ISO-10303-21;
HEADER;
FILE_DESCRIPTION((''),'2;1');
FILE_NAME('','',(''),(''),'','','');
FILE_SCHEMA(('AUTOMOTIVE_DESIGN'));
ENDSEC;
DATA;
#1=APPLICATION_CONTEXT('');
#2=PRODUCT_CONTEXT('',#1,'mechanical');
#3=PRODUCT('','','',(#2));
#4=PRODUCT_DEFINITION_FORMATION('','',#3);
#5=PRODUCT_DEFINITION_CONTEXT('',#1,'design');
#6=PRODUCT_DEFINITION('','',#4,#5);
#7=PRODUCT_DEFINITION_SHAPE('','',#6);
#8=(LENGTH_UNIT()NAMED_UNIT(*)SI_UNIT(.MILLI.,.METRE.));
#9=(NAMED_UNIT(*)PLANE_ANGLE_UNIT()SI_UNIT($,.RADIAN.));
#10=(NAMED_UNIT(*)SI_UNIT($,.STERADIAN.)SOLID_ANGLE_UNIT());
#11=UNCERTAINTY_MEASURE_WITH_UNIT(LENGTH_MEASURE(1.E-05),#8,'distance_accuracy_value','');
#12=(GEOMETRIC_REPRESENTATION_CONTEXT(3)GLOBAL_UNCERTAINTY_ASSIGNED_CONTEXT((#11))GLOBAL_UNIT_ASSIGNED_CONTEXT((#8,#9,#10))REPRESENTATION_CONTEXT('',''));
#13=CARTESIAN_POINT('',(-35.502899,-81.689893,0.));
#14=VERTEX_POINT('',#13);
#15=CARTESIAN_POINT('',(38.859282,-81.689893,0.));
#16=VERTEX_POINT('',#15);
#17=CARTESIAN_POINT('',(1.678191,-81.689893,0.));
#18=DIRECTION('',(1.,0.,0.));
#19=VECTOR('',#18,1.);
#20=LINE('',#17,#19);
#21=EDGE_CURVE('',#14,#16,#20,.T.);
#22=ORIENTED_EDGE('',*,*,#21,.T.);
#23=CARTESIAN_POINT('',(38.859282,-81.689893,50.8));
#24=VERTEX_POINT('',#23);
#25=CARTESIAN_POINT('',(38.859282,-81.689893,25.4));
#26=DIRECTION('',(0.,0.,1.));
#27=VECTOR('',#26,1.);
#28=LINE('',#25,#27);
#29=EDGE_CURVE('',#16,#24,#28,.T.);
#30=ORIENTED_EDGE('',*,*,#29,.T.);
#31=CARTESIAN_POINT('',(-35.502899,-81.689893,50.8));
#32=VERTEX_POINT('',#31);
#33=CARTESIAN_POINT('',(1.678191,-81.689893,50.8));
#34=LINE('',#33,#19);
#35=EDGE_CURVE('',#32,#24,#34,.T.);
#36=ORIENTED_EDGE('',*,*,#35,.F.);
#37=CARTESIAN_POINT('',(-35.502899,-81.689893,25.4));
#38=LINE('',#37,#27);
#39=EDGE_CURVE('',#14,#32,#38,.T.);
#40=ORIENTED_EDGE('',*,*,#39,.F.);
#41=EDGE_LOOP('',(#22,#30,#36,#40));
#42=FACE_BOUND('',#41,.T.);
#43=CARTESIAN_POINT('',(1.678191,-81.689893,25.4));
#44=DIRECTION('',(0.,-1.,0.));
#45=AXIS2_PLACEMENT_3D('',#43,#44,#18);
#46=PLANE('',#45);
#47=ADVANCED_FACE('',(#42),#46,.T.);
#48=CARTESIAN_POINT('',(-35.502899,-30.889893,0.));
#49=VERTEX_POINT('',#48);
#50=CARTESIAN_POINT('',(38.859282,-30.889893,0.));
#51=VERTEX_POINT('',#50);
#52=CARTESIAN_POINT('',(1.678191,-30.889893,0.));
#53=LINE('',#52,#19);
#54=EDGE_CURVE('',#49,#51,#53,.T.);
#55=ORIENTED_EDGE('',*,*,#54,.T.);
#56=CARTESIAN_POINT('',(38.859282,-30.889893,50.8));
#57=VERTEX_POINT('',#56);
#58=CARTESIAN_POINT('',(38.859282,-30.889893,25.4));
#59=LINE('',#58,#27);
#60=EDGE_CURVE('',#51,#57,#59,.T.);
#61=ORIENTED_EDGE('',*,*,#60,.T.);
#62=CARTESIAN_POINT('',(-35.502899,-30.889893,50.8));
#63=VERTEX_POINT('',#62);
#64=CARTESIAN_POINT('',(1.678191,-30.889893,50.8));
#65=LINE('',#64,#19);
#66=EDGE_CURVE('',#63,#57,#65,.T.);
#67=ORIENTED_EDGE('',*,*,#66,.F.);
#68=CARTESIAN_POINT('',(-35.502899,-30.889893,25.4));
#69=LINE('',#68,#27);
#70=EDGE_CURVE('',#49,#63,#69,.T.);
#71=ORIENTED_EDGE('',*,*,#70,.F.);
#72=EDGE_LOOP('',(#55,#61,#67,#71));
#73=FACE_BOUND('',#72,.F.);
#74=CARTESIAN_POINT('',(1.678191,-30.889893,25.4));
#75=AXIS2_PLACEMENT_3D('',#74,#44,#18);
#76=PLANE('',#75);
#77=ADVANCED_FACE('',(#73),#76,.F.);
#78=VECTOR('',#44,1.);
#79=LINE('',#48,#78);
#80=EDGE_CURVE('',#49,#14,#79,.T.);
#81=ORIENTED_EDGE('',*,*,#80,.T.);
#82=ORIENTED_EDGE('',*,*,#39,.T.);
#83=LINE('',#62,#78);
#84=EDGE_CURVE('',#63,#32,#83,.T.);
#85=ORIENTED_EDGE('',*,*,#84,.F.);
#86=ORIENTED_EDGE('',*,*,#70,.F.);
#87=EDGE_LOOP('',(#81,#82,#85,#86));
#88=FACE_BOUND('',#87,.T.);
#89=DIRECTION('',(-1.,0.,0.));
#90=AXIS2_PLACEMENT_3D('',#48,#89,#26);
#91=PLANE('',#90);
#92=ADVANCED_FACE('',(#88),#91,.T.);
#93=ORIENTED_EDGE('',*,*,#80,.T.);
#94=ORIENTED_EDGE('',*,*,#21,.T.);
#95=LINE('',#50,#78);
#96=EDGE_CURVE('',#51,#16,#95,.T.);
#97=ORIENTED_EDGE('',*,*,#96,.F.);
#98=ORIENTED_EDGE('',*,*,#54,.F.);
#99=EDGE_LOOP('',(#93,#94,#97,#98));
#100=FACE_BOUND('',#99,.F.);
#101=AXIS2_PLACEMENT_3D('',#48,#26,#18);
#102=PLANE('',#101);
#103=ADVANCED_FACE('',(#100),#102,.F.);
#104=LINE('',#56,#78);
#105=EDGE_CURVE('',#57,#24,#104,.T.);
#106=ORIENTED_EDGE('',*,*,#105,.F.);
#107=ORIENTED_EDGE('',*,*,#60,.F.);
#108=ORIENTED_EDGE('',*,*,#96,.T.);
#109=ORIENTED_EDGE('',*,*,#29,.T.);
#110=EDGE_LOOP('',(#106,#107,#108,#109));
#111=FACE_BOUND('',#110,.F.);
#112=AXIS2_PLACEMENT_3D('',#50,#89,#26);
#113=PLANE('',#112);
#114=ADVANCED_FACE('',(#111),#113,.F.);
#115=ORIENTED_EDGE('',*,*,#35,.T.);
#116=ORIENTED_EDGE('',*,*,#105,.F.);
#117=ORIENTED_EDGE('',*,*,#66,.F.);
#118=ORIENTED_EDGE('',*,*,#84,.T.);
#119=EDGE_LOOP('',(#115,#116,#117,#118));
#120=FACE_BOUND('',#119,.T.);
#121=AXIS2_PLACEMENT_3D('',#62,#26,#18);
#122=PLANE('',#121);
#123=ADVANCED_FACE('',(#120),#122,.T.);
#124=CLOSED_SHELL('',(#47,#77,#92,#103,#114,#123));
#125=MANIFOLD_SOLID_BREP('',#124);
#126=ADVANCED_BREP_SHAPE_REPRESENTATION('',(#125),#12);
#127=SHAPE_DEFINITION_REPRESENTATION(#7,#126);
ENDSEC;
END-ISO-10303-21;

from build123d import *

# Parameters (mm, degrees)
F1_E0_TOP_W = 74.3621811271
F1_E0_TOP_H = 50.8
F2_DEPTH    = 50.8
F3_R        = 17.9542395823
F4_DEPTH    = 50.8


with BuildPart() as f2:
    # F1_E0_top (on explicit) → F2 (new body)
    with BuildSketch(Plane(origin=(-35.5028994381, -30.8898929507, 0), x_dir=(1, 0, 0), z_dir=(0, -1, 0))):
        with Locations((37.1810905635, 25.4)):
            Rectangle(F1_E0_TOP_W, F1_E0_TOP_H)
    extrude(amount=F2_DEPTH)

    # F3 (on face) → F4 (join)
    with BuildSketch(Plane.XY.offset(50.8)):
        with Locations((0, -52.5342226028)):
            Circle(F3_R)
    extrude(amount=-F4_DEPTH)


solid = f2.part
